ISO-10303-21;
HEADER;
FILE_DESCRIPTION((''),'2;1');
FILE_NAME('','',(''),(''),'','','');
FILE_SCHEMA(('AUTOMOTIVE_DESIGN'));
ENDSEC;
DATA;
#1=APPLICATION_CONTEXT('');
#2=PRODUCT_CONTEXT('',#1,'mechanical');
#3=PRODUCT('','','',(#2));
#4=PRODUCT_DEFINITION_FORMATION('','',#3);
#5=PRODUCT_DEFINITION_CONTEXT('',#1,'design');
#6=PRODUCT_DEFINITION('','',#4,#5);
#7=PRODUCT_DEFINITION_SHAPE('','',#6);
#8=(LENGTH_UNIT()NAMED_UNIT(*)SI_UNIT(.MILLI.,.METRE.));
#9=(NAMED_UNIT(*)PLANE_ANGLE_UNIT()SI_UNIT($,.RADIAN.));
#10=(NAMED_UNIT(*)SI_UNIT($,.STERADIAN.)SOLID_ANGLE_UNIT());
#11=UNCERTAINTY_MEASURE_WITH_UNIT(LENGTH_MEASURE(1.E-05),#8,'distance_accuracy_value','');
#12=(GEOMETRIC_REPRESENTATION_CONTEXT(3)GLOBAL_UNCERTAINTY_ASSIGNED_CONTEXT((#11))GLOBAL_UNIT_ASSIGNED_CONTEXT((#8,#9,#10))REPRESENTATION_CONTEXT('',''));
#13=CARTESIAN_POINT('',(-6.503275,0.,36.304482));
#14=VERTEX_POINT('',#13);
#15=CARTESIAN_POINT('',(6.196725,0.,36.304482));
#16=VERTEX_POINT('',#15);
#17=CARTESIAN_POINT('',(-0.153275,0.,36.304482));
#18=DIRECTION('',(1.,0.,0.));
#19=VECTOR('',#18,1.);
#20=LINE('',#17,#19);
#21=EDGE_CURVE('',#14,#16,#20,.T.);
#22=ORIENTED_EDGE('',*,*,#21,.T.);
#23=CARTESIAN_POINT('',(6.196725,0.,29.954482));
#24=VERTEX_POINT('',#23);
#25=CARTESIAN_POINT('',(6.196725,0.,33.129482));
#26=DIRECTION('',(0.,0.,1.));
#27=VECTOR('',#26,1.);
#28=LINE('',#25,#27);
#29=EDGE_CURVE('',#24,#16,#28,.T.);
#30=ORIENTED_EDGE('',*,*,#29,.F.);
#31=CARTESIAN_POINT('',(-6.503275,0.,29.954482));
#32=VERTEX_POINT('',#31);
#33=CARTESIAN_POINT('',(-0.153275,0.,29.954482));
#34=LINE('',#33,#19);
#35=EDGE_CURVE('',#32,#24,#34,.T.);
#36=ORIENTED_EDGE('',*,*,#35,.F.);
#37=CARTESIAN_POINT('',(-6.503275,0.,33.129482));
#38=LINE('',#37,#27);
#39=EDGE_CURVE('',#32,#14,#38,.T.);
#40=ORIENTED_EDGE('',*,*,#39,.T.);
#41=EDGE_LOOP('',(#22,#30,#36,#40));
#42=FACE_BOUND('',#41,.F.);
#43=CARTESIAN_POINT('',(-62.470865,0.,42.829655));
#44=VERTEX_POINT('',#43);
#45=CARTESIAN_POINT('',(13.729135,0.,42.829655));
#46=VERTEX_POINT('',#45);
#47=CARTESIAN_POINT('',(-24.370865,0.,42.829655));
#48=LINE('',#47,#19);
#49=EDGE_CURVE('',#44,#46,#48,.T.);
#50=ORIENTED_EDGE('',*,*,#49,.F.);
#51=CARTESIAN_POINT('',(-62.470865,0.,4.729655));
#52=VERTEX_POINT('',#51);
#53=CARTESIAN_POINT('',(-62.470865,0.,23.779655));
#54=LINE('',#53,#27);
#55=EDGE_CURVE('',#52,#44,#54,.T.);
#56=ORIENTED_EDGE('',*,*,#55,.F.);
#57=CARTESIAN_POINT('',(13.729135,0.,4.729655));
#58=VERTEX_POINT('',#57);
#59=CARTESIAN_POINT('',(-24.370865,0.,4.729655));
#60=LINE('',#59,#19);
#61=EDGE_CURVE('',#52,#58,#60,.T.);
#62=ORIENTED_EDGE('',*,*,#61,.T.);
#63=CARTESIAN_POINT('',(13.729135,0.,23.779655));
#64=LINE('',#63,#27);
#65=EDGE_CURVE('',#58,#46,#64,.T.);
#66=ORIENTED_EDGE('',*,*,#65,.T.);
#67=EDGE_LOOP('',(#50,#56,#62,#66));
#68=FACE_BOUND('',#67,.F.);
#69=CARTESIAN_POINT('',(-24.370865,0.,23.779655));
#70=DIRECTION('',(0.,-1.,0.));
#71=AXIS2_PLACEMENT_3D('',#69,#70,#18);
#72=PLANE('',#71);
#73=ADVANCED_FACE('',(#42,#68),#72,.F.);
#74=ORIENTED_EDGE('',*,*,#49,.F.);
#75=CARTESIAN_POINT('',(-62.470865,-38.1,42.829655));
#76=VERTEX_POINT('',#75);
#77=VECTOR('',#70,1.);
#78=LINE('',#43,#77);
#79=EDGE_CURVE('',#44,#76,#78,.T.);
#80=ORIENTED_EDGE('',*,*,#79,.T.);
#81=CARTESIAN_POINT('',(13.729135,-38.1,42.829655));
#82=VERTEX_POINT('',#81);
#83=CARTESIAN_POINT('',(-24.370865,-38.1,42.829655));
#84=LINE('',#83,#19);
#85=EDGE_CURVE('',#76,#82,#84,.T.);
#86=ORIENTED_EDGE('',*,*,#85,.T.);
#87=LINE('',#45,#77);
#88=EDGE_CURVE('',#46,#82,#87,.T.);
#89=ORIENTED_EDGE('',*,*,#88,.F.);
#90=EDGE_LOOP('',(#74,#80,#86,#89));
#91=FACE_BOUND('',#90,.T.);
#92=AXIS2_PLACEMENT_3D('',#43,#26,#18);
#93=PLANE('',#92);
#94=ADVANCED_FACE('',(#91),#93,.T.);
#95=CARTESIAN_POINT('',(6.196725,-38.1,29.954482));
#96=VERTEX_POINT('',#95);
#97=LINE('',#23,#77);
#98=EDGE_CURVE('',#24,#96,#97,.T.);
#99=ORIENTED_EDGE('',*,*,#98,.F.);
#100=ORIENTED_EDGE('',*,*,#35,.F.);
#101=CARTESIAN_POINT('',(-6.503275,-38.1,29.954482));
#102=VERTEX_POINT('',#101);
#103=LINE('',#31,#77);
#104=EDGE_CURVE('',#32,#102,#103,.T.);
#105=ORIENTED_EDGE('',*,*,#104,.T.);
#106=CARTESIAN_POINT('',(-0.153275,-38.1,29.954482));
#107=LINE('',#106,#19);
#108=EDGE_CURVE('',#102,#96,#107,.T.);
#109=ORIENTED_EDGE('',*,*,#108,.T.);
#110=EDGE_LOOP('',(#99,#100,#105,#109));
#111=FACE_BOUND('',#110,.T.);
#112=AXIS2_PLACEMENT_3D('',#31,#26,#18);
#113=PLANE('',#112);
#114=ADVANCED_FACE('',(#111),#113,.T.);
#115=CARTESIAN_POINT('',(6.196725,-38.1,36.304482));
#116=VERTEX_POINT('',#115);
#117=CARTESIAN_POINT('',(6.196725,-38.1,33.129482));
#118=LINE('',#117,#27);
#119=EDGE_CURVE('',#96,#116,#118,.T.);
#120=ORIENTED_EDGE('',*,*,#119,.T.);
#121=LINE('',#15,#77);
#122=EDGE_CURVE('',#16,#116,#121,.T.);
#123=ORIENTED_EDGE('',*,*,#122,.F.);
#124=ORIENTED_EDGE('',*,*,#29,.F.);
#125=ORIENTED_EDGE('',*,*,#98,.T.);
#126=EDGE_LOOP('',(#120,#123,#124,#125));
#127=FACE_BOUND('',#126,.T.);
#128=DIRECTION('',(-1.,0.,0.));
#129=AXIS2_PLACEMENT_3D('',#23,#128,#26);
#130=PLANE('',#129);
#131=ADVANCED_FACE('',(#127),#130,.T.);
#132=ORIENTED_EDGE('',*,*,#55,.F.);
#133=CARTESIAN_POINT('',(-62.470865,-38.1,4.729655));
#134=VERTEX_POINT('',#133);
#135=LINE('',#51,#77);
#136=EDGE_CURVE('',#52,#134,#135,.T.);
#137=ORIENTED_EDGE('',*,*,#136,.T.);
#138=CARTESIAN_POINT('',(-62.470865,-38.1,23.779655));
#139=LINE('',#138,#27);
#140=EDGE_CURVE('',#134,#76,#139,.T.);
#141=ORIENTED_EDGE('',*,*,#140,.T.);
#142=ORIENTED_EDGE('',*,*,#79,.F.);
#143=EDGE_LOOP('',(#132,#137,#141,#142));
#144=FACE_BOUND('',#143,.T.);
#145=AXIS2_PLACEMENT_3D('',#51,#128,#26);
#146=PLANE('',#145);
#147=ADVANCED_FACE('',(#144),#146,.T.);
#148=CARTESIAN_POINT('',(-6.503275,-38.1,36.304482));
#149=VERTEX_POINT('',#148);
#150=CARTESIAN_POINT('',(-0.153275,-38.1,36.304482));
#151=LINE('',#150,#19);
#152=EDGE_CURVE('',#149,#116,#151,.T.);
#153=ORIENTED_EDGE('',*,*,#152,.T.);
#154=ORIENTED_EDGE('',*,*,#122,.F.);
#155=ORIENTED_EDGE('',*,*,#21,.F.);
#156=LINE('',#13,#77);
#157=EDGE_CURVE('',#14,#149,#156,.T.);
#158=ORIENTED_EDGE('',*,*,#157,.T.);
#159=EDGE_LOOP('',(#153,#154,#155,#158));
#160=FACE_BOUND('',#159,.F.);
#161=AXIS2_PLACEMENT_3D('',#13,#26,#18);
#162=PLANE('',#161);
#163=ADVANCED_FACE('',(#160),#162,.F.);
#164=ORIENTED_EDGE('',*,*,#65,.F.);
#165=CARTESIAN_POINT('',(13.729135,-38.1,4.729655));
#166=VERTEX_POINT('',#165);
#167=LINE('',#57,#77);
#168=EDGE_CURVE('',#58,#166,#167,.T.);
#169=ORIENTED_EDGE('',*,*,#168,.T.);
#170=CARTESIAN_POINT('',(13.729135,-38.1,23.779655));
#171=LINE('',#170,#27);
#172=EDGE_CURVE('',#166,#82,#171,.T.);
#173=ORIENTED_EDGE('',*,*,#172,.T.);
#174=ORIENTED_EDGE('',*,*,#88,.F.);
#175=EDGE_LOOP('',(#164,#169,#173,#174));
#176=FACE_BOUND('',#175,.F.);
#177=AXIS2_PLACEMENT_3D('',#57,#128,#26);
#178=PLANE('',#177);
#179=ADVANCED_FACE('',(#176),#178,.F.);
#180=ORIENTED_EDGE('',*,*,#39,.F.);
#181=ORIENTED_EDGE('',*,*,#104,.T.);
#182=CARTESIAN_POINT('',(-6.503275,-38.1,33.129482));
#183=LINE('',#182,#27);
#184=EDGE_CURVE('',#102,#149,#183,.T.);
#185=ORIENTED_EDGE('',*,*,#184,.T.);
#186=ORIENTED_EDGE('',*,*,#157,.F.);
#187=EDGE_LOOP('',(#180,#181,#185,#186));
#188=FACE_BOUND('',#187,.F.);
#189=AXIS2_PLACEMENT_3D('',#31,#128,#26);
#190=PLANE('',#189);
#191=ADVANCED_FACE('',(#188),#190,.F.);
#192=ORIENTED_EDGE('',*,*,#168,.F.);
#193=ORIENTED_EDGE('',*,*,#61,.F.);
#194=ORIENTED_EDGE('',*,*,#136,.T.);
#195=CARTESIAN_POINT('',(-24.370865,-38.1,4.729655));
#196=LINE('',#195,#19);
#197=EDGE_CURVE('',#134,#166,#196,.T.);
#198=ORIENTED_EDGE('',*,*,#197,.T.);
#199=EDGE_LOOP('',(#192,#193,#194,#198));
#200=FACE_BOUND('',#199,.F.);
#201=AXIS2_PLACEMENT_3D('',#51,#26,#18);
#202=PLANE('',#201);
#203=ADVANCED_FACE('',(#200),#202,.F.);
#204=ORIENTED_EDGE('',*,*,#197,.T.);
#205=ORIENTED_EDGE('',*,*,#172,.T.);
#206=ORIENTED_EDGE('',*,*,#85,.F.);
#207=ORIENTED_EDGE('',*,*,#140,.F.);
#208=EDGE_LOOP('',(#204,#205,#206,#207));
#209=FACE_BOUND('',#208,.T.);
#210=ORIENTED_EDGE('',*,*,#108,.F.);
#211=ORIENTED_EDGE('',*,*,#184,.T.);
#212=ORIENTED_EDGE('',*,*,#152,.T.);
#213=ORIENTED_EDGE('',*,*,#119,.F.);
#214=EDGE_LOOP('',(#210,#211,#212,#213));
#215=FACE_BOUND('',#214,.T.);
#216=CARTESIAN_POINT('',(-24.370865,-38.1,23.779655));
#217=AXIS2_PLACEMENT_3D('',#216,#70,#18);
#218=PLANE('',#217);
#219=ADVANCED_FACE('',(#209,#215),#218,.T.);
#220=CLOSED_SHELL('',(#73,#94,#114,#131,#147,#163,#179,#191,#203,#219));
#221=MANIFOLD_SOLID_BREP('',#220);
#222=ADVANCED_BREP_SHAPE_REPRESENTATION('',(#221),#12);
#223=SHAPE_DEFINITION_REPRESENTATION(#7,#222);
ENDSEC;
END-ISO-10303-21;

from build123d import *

# Parameters (mm, degrees)
F0_W     = 76.2
F0_H     = 38.1
F0_W_2   = 12.7
F0_H_2   = 6.35
F1_DEPTH = 38.1


# Not quite as in the source:
# - the program builds the solid bodies; features that only make, move or delete a surface that nothing else refers to are left out


with BuildPart() as f1:
    # F0 (on Front) → F1 (new body)
    with BuildSketch(Plane.XZ):
        with Locations((-24.3708645046, 23.7796551056)):
            Rectangle(F0_W, F0_H)
        with Locations((-0.1532746643, 33.1294818699)):
            Rectangle(F0_W_2, F0_H_2, mode=Mode.SUBTRACT)
    extrude(amount=F1_DEPTH)


solid = f1.part
